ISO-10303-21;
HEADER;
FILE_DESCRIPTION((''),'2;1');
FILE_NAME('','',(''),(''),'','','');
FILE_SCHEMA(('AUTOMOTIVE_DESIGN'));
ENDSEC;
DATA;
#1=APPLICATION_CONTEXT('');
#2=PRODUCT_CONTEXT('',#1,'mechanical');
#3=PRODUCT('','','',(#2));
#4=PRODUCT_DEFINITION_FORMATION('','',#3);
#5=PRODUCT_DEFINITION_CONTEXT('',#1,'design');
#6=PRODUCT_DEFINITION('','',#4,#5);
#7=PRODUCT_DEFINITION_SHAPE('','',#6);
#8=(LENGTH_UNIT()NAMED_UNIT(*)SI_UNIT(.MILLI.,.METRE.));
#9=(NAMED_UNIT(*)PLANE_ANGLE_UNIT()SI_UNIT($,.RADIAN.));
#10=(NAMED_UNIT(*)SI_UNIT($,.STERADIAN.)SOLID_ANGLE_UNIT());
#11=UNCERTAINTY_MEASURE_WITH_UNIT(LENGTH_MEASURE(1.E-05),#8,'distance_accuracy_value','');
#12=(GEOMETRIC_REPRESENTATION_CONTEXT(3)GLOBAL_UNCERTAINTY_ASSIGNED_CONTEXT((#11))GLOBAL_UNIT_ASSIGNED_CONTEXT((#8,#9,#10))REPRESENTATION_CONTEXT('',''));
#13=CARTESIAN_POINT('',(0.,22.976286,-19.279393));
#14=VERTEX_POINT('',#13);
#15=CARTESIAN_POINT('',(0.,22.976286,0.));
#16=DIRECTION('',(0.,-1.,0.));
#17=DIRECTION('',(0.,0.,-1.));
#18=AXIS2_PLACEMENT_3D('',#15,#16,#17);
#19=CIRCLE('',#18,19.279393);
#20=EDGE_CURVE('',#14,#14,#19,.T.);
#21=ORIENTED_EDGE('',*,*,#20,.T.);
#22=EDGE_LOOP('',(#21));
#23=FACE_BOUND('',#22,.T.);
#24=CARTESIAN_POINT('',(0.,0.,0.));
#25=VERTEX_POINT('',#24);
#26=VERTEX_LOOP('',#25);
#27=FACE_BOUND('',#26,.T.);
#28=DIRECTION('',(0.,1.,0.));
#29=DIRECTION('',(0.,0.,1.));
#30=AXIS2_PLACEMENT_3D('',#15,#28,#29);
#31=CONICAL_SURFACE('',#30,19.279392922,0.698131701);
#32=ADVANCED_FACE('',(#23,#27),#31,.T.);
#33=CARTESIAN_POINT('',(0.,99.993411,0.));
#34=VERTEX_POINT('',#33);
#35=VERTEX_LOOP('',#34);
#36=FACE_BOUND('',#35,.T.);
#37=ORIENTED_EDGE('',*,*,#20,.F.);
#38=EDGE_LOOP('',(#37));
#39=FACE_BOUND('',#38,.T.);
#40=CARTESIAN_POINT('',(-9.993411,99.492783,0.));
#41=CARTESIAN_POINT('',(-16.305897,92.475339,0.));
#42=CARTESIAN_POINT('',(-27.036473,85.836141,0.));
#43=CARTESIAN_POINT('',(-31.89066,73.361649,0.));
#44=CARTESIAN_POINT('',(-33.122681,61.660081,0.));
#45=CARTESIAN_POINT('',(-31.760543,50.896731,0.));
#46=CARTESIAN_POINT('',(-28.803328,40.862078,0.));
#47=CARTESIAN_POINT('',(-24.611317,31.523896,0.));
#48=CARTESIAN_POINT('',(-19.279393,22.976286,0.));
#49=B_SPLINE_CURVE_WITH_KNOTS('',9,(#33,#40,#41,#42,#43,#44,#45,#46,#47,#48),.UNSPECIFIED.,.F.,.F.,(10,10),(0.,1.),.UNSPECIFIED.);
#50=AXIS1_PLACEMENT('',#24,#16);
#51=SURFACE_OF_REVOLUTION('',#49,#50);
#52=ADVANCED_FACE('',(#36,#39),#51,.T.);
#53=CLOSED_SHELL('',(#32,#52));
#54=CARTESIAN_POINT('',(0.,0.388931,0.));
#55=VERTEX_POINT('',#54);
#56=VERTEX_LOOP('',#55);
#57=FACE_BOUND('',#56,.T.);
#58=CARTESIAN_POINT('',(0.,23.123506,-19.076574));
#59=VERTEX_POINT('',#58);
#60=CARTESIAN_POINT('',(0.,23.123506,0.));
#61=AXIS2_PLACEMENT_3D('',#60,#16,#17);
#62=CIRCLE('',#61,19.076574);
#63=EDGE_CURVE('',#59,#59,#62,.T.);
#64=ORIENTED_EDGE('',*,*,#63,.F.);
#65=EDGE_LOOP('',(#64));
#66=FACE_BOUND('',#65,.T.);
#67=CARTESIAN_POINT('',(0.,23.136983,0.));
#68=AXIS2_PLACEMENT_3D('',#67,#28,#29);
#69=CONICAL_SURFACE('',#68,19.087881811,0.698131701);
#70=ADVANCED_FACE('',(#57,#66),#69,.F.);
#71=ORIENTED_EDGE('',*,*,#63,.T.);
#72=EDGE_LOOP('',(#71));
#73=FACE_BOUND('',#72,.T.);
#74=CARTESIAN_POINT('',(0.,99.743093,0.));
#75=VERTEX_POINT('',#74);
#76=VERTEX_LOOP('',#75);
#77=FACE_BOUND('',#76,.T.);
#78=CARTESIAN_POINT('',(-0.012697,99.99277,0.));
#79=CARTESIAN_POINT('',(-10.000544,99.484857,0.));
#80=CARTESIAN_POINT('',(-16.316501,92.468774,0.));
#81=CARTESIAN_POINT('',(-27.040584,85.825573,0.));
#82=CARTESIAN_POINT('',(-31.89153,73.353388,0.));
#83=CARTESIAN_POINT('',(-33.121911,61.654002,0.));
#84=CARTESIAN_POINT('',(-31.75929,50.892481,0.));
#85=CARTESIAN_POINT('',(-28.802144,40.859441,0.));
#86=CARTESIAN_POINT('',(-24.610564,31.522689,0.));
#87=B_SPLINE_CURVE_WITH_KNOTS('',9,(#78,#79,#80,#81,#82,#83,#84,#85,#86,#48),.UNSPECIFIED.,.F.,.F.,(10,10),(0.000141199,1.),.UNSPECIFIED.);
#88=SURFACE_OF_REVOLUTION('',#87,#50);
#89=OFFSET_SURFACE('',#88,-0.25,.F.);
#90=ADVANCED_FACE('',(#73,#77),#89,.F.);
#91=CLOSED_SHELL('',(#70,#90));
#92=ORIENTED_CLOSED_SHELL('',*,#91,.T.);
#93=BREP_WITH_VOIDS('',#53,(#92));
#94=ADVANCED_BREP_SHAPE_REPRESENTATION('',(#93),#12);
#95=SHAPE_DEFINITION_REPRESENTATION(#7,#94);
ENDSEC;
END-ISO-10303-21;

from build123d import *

# Parameters (mm, degrees)
SHELL1_T = 0.25


# Read off the part's stored shape, not the designer's step: Revolve1
with BuildPart() as part:
    # Revolve1 outline → Revolve1 (revolve)
    with BuildSketch(Plane.XY):
        with BuildLine():
            Line((0, 99.993410936), (0, 0))
            Line((0, 0), (19.279392922, 22.976285778))
            add(Edge.make_bspline(
                [(19.279392922, 22.976285778), (24.61131684, 31.523895726), (28.803327549, 40.862078497), (31.760542973, 50.896731386), (33.122680804, 61.660081015), (31.89066049, 73.361649155), (27.036472848, 85.836141268), (16.305897295, 92.475338884), (9.993410936, 99.4927835), (0, 99.993410936)],
                knots=[0.596124792, 0.596124792, 0.596124792, 0.596124792, 0.596124792, 0.596124792, 0.596124792, 0.596124792, 0.596124792, 0.596124792, 1.596124792, 1.596124792, 1.596124792, 1.596124792, 1.596124792, 1.596124792, 1.596124792, 1.596124792, 1.596124792, 1.596124792], degree=9))
        make_face()
    revolve(axis=Axis((0, 0, 0), (0, 1, 0)))

    # Shell1 (no face opened: a closed hollow body)
    add(offset(amount=-SHELL1_T, mode=Mode.PRIVATE), mode=Mode.SUBTRACT)


solid = part.part
